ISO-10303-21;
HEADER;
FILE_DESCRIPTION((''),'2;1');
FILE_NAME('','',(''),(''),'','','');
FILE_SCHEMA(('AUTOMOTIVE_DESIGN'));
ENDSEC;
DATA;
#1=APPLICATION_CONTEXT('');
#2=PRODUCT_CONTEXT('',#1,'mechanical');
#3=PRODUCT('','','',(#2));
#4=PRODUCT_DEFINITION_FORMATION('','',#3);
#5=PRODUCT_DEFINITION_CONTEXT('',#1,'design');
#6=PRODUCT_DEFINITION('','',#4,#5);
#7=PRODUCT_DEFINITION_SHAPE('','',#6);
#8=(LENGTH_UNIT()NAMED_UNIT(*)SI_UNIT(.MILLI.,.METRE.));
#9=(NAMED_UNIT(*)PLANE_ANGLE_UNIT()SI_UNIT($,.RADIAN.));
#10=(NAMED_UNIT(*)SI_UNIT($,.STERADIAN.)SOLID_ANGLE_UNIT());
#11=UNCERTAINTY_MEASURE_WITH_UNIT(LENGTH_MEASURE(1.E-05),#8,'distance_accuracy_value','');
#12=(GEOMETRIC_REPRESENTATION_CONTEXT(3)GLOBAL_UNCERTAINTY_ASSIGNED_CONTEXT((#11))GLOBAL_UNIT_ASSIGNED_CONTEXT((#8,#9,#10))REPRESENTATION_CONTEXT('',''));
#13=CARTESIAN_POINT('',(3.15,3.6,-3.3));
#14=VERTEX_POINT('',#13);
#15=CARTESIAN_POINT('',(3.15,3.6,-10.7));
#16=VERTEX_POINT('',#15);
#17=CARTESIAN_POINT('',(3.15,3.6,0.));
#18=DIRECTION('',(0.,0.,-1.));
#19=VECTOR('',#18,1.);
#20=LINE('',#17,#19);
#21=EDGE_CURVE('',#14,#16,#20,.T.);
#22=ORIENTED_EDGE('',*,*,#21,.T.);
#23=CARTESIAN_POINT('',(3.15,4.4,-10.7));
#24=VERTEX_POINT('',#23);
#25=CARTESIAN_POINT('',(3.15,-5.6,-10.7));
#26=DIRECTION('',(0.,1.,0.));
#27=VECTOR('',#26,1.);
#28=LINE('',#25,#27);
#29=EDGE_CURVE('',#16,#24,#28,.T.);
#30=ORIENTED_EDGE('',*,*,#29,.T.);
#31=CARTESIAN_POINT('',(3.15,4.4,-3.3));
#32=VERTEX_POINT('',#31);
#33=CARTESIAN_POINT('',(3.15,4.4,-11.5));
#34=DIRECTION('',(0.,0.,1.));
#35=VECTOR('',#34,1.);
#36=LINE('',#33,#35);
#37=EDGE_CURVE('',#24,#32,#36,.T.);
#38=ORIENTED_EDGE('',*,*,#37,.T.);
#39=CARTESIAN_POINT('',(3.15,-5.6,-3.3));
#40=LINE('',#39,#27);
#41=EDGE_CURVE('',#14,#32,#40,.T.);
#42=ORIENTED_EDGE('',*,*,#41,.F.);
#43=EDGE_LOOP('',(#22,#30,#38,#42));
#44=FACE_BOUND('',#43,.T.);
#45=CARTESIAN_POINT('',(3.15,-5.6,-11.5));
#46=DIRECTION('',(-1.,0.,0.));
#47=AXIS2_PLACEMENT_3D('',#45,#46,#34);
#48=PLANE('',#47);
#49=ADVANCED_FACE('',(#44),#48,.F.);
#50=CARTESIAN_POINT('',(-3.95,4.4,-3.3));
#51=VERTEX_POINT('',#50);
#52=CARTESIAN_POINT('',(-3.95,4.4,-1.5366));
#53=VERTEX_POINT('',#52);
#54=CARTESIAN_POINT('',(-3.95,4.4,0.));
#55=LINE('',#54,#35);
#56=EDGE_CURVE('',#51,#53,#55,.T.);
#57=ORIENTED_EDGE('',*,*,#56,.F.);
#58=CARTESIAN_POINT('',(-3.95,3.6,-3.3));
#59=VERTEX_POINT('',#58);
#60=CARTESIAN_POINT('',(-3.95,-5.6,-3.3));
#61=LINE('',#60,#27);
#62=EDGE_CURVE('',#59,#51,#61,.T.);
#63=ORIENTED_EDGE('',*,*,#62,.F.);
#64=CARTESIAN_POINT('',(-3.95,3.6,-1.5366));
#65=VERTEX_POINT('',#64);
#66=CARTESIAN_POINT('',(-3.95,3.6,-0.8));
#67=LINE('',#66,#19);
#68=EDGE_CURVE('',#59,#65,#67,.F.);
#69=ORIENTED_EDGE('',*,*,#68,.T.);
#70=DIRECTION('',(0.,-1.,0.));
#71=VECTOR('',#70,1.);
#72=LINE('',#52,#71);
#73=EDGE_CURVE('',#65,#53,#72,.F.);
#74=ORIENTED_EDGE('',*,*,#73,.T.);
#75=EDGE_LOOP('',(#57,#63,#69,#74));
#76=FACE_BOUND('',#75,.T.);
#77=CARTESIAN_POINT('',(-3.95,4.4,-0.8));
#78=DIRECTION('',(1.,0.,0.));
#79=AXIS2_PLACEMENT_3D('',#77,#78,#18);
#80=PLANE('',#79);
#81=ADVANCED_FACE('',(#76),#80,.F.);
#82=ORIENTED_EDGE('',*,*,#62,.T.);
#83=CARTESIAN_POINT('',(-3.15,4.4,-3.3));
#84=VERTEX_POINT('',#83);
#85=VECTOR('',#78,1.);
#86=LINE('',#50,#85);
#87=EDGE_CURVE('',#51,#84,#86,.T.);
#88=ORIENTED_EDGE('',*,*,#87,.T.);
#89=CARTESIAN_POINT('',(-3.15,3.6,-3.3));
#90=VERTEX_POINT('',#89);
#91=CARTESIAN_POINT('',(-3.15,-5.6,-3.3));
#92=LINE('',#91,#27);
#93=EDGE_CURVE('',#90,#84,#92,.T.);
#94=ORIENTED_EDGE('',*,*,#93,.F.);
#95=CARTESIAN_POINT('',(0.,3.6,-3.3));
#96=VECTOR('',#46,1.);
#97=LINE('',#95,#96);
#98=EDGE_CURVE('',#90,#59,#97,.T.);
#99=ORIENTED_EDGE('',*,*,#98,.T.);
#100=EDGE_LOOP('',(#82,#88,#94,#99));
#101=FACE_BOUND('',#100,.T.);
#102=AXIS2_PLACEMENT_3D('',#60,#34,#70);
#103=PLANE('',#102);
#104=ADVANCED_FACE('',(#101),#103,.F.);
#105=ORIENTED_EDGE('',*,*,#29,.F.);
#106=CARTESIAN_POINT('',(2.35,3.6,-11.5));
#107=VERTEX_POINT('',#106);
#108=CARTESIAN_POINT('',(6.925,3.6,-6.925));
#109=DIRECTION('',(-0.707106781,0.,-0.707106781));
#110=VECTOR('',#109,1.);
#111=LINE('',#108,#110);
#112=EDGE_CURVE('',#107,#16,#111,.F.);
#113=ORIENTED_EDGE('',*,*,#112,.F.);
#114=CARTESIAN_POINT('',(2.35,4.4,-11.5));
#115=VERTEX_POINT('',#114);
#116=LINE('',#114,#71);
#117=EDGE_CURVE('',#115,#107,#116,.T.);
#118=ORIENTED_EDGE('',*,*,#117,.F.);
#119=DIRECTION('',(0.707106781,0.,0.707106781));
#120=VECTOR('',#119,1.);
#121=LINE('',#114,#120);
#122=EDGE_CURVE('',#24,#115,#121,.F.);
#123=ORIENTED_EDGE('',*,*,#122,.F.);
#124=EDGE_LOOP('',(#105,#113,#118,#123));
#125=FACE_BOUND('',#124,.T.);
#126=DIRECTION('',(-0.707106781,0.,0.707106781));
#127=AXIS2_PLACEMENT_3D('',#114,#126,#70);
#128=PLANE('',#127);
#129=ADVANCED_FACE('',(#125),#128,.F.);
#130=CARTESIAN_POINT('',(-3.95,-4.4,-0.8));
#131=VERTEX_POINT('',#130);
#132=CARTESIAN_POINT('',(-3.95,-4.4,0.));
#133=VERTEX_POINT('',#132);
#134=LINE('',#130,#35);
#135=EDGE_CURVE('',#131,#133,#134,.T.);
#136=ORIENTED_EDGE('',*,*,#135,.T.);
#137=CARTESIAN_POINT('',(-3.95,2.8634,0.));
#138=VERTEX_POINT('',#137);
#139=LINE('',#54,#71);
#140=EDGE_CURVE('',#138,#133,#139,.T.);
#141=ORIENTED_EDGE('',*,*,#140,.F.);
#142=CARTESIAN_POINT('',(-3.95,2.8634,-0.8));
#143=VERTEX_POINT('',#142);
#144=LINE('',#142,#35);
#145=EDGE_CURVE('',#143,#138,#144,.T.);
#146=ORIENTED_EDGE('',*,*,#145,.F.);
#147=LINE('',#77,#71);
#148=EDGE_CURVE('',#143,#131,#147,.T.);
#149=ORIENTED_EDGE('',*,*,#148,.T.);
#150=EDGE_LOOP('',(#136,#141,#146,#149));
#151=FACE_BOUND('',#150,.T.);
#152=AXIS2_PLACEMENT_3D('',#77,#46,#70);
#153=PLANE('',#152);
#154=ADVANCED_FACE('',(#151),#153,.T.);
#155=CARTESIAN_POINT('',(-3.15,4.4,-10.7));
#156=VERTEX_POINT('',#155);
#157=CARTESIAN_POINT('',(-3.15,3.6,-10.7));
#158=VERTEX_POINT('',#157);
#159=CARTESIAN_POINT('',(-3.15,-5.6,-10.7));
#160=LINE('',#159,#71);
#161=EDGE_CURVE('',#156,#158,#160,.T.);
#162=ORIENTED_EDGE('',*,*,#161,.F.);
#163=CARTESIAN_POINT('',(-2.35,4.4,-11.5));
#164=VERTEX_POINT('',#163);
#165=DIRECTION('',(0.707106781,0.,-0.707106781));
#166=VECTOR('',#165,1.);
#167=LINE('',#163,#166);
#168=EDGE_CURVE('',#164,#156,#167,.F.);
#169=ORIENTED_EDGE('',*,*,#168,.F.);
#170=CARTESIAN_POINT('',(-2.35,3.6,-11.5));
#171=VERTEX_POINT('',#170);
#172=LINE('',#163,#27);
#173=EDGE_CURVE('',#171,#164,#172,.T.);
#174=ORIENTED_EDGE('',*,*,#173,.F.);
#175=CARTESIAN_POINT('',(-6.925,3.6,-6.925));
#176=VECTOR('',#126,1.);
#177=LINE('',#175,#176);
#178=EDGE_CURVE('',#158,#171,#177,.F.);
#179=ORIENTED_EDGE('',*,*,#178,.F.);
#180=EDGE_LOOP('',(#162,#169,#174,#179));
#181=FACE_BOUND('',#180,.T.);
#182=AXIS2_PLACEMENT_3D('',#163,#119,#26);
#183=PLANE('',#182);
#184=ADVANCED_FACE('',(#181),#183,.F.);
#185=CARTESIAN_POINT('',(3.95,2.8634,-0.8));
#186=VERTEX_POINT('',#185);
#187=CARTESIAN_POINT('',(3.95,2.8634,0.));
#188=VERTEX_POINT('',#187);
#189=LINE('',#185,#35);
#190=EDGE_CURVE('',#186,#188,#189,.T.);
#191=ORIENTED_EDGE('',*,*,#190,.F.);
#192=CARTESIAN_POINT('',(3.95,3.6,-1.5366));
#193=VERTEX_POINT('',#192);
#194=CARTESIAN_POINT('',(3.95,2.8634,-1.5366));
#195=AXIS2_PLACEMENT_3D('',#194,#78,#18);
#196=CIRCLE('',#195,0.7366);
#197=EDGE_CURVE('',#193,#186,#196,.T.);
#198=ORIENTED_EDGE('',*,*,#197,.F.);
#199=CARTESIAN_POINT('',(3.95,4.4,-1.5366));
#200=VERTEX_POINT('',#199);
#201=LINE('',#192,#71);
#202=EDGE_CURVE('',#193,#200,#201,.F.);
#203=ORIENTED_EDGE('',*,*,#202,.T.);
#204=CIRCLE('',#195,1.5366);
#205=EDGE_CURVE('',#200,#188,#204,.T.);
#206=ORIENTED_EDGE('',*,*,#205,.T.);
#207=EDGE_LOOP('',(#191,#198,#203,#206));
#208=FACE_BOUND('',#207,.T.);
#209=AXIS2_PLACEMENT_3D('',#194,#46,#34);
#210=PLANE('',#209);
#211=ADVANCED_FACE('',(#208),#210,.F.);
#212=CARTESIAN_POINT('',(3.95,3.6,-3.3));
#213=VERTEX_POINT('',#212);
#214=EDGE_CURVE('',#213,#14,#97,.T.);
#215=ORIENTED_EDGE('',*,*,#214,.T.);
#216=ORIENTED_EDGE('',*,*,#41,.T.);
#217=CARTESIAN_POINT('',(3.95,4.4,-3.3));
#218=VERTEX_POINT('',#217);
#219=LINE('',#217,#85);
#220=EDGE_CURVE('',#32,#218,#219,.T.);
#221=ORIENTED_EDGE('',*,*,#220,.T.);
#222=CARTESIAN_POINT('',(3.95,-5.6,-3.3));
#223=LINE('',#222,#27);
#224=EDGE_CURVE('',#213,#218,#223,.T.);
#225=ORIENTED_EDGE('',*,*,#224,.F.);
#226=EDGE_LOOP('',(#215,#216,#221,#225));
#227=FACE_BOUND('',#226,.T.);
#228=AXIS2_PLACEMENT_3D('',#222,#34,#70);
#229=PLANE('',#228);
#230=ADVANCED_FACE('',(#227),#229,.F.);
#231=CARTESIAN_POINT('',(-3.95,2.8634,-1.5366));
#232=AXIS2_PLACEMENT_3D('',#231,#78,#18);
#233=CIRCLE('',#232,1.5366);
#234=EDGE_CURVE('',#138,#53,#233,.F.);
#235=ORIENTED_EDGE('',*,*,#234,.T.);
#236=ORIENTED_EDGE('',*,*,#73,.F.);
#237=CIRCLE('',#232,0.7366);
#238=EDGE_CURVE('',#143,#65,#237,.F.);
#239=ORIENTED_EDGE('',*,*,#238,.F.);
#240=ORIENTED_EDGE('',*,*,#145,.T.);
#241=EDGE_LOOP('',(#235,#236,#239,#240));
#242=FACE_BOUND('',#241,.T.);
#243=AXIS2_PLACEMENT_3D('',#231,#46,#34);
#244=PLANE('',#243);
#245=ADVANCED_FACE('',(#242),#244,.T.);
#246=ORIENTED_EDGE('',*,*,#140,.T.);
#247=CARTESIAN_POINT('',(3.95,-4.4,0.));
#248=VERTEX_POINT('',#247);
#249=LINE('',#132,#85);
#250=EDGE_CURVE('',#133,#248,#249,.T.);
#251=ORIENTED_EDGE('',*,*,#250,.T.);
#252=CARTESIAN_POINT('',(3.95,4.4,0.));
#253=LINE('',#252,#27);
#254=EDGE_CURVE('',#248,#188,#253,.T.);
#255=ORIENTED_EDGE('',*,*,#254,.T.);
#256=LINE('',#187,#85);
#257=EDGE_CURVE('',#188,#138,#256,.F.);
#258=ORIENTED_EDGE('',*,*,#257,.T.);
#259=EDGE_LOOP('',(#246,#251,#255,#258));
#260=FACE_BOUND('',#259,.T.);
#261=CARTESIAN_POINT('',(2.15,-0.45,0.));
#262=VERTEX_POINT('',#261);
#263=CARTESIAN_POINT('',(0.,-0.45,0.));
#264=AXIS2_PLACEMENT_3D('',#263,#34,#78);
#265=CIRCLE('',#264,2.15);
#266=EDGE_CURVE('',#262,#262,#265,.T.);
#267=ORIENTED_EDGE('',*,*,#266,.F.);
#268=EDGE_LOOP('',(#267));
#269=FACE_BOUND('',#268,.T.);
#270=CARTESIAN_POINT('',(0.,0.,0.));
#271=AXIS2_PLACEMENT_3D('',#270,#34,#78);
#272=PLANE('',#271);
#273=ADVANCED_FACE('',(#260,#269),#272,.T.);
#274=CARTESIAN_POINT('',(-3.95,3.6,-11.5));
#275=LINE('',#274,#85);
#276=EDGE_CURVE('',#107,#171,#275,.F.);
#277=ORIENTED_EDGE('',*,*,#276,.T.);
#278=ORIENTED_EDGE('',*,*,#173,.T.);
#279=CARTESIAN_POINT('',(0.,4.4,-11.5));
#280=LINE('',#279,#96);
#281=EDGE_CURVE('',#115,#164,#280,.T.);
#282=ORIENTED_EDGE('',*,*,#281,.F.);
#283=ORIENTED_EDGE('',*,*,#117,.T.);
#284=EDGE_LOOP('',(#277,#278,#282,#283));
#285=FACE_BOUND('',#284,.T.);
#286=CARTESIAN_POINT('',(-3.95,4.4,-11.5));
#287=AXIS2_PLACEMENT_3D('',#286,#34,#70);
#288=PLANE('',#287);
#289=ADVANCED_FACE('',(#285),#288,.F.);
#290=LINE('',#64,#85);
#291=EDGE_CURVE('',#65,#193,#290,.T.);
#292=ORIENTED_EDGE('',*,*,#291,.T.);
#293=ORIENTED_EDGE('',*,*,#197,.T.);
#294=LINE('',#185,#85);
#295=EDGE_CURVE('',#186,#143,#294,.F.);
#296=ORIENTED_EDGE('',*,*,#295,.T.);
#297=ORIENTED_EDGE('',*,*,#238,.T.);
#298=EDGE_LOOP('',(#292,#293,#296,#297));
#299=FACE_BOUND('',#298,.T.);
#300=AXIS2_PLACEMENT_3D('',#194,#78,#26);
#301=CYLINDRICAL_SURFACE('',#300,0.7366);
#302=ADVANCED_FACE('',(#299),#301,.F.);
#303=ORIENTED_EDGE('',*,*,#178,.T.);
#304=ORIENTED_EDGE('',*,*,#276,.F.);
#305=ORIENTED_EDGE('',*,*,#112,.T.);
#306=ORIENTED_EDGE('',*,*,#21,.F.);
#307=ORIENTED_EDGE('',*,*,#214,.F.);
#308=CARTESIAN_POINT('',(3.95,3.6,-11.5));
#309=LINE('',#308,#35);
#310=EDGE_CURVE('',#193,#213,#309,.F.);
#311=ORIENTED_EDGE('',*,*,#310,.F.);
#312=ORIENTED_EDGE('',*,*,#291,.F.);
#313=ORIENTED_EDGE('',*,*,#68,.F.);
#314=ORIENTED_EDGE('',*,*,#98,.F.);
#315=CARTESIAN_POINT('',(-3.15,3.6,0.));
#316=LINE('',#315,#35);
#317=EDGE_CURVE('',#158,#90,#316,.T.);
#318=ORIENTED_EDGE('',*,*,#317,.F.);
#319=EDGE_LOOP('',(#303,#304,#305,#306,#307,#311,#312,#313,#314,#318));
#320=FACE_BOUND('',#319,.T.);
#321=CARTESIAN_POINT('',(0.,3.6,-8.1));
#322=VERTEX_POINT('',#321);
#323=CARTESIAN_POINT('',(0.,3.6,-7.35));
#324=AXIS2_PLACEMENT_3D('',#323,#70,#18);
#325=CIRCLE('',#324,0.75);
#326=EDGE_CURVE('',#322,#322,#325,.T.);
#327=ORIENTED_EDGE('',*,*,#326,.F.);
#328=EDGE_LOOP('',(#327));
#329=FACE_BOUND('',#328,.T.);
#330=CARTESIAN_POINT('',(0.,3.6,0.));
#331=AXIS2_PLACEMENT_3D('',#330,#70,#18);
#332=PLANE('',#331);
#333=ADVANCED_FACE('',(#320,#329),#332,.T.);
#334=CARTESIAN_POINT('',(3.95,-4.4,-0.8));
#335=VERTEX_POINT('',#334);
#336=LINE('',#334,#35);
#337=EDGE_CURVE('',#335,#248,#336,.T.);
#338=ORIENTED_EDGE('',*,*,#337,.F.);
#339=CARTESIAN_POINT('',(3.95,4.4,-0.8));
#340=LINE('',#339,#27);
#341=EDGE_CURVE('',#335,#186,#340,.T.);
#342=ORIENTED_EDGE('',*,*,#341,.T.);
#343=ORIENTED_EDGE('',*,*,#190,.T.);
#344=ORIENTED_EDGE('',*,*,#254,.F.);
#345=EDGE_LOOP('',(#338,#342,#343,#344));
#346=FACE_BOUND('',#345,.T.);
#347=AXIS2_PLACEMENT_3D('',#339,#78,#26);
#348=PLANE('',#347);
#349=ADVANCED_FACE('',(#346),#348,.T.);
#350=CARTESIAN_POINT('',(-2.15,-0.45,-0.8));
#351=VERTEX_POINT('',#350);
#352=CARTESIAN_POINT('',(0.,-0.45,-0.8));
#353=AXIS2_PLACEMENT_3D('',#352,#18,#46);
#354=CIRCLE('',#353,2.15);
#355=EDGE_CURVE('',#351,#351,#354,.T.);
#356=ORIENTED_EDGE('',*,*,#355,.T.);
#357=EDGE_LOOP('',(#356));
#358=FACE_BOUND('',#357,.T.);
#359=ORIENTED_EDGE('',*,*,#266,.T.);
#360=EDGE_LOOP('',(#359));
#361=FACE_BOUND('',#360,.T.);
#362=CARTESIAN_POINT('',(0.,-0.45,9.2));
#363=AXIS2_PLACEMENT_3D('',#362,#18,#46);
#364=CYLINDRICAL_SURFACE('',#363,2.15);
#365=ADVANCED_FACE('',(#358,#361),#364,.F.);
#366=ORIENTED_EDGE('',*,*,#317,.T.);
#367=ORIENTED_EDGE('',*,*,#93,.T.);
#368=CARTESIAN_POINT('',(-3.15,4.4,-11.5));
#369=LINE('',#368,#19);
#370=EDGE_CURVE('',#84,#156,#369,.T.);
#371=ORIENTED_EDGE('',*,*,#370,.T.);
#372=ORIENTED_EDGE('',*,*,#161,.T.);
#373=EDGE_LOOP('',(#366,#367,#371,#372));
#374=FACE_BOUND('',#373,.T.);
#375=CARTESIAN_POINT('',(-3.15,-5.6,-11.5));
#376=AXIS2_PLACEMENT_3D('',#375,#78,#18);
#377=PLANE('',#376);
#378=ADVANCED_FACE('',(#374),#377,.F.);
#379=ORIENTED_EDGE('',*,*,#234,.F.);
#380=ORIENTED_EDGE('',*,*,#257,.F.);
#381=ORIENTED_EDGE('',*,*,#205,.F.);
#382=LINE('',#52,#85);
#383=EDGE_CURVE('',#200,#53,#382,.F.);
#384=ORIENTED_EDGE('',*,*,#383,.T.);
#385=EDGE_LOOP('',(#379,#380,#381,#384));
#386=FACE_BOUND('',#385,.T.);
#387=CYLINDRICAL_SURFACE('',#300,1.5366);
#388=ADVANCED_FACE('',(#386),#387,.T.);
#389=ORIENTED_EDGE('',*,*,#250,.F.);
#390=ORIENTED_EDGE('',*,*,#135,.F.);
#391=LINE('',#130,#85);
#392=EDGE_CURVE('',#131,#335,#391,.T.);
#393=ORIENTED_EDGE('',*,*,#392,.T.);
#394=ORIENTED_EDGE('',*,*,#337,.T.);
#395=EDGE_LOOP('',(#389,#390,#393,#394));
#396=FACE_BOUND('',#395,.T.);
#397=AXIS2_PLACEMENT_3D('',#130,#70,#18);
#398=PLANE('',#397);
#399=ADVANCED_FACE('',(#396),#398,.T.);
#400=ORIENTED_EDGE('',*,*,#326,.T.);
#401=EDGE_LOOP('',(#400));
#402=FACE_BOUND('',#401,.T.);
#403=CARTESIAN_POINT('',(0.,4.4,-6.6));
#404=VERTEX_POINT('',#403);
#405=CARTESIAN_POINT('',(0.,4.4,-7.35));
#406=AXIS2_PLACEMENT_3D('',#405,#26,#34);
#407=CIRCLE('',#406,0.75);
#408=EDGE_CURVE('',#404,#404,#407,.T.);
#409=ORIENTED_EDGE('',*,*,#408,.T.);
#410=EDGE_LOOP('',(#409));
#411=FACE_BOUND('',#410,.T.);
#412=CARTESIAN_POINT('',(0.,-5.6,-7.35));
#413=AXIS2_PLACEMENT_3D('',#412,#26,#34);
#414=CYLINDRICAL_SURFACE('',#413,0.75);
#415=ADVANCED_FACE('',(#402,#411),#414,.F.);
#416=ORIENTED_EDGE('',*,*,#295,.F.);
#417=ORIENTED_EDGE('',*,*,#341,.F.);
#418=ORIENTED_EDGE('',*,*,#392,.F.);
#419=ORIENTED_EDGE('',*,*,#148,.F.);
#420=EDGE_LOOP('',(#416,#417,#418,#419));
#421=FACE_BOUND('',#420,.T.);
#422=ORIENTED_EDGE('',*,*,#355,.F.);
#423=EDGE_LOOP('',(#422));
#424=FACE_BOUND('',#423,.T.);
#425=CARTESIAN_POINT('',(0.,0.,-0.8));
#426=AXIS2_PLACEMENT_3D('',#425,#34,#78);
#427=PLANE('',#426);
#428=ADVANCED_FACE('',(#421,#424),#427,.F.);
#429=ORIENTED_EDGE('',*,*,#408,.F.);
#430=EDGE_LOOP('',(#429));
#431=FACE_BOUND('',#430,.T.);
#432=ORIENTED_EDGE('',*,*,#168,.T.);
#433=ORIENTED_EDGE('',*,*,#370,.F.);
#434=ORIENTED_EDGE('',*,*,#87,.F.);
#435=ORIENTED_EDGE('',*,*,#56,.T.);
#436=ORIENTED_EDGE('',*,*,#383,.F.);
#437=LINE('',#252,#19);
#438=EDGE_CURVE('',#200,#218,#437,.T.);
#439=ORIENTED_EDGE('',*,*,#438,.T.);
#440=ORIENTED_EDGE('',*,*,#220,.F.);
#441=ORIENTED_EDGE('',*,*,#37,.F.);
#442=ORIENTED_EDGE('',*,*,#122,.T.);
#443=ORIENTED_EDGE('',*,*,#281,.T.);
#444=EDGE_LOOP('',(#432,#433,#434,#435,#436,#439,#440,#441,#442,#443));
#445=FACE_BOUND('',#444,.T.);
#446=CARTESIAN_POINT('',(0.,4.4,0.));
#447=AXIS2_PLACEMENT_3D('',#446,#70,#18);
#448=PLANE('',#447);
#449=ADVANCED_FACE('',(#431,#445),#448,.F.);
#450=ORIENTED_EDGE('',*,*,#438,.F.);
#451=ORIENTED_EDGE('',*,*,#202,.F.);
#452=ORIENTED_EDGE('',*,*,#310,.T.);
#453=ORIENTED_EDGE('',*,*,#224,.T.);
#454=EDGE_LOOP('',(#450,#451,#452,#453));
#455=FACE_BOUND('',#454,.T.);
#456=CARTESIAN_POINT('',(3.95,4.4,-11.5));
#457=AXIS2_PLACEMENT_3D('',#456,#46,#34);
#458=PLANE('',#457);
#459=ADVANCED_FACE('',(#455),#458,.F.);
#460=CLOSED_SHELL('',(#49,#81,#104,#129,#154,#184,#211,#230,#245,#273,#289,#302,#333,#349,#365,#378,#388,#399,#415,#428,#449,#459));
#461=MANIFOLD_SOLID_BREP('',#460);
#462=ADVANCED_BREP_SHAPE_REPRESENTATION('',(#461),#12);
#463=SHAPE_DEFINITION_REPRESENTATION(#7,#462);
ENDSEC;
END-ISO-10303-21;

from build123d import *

# Parameters (mm, degrees)
SKETCH_1_W                       = 7.9
SKETCH_1_H                       = 8.8
SM_BASE_FLANGE_1_DEPTH           = 0.8
SM_EDGE_FLANGE_1_STRIP_W         = 4.6732
SM_EDGE_FLANGE_1_STRIP_H         = 0.8
SM_EDGE_FLANGE_1_STRIP_CUT_DEPTH = 7.9
SM_EDGE_FLANGE_1_DEPTH           = 7.9
SKETCH_7_R                       = 2.15
CUT_EXTRUDE_1_DEPTH              = 10
SKETCH_8_W                       = 0.8
SKETCH_8_H                       = 8.2
CUT_EXTRUDE_2_DEPTH              = 10
SKETCH_9_R                       = 0.75
CUT_EXTRUDE_3_DEPTH              = 10
CHAMFER_1_SIZE                   = 0.8


# Sheet-metal steps are written as plain solids
with BuildPart() as part:
    # Sketch 1 → 基体-法兰1 (new body)
    with BuildSketch(Plane.XY):
        Rectangle(SKETCH_1_W, SKETCH_1_H)
    extrude(amount=-SM_BASE_FLANGE_1_DEPTH)

    # 边线-法兰1 strip (across the edge) → 边线-法兰1 strip cut (cut)
    with BuildSketch(Plane(origin=(-3.95, 4.4, -0.8), x_dir=(0, -1, 0), z_dir=(1, 0, 0))):
        with Locations((-0.8, -0.4)):
            Rectangle(SM_EDGE_FLANGE_1_STRIP_W, SM_EDGE_FLANGE_1_STRIP_H)
    extrude(amount=SM_EDGE_FLANGE_1_STRIP_CUT_DEPTH, mode=Mode.SUBTRACT)

    # 边线-法兰1 section (across the edge) → 边线-法兰1 (add)
    with BuildSketch(Plane(origin=(-3.95, 4.4, -0.8), x_dir=(0, -1, 0), z_dir=(1, 0, 0))):
        with BuildLine():
            Line((0, 0.7366), (0, 10.7))
            Line((0, 10.7), (0.8, 10.7))
            Line((0.8, 10.7), (0.8, 0.7366))
            ThreePointArc((0.8, 0.7366), (1.015745145, 0.215745145), (1.5366, 0))
            Line((1.5366, 0), (1.5366, -0.8))
            ThreePointArc((1.5366, -0.8), (0.45005972, -0.34994028), (0, 0.7366))
        make_face()
    extrude(amount=SM_EDGE_FLANGE_1_DEPTH)

    # 草图7 → 切除-拉伸1 (cut)
    with BuildSketch(Plane(origin=(0, 0, -0.8), x_dir=(-1, 0, 0), z_dir=(0, 0, -1))):
        with Locations((0, -0.45)):
            Circle(SKETCH_7_R)
    extrude(amount=-CUT_EXTRUDE_1_DEPTH, mode=Mode.SUBTRACT)

    # 草图8 → 切除-拉伸2 (cut)
    with BuildSketch(Plane(origin=(0, 4.4, 0), x_dir=(1, 0, 0), z_dir=(0, 1, 0))):
        with Locations((3.55, 7.4)):
            Rectangle(SKETCH_8_W, SKETCH_8_H)
        with Locations((-3.55, 7.4)):
            Rectangle(SKETCH_8_W, SKETCH_8_H)
    extrude(amount=-CUT_EXTRUDE_2_DEPTH, mode=Mode.SUBTRACT)

    # 草图9 → 切除-拉伸3 (cut)
    with BuildSketch(Plane(origin=(0, 4.4, 0), x_dir=(1, 0, 0), z_dir=(0, 1, 0))):
        with Locations(Location((0, 7.35, 0), (0, 0, 270))):
            Circle(SKETCH_9_R)
    extrude(amount=-CUT_EXTRUDE_3_DEPTH, mode=Mode.SUBTRACT)

    # 倒角1
    chamfer_1_edges = [part.edges().sort_by_distance(p)[0] for p in [
        (-3.15, 4, -11.5),
        (3.15, 4, -11.5),
    ]]
    chamfer(chamfer_1_edges, length=CHAMFER_1_SIZE)


solid = part.part
